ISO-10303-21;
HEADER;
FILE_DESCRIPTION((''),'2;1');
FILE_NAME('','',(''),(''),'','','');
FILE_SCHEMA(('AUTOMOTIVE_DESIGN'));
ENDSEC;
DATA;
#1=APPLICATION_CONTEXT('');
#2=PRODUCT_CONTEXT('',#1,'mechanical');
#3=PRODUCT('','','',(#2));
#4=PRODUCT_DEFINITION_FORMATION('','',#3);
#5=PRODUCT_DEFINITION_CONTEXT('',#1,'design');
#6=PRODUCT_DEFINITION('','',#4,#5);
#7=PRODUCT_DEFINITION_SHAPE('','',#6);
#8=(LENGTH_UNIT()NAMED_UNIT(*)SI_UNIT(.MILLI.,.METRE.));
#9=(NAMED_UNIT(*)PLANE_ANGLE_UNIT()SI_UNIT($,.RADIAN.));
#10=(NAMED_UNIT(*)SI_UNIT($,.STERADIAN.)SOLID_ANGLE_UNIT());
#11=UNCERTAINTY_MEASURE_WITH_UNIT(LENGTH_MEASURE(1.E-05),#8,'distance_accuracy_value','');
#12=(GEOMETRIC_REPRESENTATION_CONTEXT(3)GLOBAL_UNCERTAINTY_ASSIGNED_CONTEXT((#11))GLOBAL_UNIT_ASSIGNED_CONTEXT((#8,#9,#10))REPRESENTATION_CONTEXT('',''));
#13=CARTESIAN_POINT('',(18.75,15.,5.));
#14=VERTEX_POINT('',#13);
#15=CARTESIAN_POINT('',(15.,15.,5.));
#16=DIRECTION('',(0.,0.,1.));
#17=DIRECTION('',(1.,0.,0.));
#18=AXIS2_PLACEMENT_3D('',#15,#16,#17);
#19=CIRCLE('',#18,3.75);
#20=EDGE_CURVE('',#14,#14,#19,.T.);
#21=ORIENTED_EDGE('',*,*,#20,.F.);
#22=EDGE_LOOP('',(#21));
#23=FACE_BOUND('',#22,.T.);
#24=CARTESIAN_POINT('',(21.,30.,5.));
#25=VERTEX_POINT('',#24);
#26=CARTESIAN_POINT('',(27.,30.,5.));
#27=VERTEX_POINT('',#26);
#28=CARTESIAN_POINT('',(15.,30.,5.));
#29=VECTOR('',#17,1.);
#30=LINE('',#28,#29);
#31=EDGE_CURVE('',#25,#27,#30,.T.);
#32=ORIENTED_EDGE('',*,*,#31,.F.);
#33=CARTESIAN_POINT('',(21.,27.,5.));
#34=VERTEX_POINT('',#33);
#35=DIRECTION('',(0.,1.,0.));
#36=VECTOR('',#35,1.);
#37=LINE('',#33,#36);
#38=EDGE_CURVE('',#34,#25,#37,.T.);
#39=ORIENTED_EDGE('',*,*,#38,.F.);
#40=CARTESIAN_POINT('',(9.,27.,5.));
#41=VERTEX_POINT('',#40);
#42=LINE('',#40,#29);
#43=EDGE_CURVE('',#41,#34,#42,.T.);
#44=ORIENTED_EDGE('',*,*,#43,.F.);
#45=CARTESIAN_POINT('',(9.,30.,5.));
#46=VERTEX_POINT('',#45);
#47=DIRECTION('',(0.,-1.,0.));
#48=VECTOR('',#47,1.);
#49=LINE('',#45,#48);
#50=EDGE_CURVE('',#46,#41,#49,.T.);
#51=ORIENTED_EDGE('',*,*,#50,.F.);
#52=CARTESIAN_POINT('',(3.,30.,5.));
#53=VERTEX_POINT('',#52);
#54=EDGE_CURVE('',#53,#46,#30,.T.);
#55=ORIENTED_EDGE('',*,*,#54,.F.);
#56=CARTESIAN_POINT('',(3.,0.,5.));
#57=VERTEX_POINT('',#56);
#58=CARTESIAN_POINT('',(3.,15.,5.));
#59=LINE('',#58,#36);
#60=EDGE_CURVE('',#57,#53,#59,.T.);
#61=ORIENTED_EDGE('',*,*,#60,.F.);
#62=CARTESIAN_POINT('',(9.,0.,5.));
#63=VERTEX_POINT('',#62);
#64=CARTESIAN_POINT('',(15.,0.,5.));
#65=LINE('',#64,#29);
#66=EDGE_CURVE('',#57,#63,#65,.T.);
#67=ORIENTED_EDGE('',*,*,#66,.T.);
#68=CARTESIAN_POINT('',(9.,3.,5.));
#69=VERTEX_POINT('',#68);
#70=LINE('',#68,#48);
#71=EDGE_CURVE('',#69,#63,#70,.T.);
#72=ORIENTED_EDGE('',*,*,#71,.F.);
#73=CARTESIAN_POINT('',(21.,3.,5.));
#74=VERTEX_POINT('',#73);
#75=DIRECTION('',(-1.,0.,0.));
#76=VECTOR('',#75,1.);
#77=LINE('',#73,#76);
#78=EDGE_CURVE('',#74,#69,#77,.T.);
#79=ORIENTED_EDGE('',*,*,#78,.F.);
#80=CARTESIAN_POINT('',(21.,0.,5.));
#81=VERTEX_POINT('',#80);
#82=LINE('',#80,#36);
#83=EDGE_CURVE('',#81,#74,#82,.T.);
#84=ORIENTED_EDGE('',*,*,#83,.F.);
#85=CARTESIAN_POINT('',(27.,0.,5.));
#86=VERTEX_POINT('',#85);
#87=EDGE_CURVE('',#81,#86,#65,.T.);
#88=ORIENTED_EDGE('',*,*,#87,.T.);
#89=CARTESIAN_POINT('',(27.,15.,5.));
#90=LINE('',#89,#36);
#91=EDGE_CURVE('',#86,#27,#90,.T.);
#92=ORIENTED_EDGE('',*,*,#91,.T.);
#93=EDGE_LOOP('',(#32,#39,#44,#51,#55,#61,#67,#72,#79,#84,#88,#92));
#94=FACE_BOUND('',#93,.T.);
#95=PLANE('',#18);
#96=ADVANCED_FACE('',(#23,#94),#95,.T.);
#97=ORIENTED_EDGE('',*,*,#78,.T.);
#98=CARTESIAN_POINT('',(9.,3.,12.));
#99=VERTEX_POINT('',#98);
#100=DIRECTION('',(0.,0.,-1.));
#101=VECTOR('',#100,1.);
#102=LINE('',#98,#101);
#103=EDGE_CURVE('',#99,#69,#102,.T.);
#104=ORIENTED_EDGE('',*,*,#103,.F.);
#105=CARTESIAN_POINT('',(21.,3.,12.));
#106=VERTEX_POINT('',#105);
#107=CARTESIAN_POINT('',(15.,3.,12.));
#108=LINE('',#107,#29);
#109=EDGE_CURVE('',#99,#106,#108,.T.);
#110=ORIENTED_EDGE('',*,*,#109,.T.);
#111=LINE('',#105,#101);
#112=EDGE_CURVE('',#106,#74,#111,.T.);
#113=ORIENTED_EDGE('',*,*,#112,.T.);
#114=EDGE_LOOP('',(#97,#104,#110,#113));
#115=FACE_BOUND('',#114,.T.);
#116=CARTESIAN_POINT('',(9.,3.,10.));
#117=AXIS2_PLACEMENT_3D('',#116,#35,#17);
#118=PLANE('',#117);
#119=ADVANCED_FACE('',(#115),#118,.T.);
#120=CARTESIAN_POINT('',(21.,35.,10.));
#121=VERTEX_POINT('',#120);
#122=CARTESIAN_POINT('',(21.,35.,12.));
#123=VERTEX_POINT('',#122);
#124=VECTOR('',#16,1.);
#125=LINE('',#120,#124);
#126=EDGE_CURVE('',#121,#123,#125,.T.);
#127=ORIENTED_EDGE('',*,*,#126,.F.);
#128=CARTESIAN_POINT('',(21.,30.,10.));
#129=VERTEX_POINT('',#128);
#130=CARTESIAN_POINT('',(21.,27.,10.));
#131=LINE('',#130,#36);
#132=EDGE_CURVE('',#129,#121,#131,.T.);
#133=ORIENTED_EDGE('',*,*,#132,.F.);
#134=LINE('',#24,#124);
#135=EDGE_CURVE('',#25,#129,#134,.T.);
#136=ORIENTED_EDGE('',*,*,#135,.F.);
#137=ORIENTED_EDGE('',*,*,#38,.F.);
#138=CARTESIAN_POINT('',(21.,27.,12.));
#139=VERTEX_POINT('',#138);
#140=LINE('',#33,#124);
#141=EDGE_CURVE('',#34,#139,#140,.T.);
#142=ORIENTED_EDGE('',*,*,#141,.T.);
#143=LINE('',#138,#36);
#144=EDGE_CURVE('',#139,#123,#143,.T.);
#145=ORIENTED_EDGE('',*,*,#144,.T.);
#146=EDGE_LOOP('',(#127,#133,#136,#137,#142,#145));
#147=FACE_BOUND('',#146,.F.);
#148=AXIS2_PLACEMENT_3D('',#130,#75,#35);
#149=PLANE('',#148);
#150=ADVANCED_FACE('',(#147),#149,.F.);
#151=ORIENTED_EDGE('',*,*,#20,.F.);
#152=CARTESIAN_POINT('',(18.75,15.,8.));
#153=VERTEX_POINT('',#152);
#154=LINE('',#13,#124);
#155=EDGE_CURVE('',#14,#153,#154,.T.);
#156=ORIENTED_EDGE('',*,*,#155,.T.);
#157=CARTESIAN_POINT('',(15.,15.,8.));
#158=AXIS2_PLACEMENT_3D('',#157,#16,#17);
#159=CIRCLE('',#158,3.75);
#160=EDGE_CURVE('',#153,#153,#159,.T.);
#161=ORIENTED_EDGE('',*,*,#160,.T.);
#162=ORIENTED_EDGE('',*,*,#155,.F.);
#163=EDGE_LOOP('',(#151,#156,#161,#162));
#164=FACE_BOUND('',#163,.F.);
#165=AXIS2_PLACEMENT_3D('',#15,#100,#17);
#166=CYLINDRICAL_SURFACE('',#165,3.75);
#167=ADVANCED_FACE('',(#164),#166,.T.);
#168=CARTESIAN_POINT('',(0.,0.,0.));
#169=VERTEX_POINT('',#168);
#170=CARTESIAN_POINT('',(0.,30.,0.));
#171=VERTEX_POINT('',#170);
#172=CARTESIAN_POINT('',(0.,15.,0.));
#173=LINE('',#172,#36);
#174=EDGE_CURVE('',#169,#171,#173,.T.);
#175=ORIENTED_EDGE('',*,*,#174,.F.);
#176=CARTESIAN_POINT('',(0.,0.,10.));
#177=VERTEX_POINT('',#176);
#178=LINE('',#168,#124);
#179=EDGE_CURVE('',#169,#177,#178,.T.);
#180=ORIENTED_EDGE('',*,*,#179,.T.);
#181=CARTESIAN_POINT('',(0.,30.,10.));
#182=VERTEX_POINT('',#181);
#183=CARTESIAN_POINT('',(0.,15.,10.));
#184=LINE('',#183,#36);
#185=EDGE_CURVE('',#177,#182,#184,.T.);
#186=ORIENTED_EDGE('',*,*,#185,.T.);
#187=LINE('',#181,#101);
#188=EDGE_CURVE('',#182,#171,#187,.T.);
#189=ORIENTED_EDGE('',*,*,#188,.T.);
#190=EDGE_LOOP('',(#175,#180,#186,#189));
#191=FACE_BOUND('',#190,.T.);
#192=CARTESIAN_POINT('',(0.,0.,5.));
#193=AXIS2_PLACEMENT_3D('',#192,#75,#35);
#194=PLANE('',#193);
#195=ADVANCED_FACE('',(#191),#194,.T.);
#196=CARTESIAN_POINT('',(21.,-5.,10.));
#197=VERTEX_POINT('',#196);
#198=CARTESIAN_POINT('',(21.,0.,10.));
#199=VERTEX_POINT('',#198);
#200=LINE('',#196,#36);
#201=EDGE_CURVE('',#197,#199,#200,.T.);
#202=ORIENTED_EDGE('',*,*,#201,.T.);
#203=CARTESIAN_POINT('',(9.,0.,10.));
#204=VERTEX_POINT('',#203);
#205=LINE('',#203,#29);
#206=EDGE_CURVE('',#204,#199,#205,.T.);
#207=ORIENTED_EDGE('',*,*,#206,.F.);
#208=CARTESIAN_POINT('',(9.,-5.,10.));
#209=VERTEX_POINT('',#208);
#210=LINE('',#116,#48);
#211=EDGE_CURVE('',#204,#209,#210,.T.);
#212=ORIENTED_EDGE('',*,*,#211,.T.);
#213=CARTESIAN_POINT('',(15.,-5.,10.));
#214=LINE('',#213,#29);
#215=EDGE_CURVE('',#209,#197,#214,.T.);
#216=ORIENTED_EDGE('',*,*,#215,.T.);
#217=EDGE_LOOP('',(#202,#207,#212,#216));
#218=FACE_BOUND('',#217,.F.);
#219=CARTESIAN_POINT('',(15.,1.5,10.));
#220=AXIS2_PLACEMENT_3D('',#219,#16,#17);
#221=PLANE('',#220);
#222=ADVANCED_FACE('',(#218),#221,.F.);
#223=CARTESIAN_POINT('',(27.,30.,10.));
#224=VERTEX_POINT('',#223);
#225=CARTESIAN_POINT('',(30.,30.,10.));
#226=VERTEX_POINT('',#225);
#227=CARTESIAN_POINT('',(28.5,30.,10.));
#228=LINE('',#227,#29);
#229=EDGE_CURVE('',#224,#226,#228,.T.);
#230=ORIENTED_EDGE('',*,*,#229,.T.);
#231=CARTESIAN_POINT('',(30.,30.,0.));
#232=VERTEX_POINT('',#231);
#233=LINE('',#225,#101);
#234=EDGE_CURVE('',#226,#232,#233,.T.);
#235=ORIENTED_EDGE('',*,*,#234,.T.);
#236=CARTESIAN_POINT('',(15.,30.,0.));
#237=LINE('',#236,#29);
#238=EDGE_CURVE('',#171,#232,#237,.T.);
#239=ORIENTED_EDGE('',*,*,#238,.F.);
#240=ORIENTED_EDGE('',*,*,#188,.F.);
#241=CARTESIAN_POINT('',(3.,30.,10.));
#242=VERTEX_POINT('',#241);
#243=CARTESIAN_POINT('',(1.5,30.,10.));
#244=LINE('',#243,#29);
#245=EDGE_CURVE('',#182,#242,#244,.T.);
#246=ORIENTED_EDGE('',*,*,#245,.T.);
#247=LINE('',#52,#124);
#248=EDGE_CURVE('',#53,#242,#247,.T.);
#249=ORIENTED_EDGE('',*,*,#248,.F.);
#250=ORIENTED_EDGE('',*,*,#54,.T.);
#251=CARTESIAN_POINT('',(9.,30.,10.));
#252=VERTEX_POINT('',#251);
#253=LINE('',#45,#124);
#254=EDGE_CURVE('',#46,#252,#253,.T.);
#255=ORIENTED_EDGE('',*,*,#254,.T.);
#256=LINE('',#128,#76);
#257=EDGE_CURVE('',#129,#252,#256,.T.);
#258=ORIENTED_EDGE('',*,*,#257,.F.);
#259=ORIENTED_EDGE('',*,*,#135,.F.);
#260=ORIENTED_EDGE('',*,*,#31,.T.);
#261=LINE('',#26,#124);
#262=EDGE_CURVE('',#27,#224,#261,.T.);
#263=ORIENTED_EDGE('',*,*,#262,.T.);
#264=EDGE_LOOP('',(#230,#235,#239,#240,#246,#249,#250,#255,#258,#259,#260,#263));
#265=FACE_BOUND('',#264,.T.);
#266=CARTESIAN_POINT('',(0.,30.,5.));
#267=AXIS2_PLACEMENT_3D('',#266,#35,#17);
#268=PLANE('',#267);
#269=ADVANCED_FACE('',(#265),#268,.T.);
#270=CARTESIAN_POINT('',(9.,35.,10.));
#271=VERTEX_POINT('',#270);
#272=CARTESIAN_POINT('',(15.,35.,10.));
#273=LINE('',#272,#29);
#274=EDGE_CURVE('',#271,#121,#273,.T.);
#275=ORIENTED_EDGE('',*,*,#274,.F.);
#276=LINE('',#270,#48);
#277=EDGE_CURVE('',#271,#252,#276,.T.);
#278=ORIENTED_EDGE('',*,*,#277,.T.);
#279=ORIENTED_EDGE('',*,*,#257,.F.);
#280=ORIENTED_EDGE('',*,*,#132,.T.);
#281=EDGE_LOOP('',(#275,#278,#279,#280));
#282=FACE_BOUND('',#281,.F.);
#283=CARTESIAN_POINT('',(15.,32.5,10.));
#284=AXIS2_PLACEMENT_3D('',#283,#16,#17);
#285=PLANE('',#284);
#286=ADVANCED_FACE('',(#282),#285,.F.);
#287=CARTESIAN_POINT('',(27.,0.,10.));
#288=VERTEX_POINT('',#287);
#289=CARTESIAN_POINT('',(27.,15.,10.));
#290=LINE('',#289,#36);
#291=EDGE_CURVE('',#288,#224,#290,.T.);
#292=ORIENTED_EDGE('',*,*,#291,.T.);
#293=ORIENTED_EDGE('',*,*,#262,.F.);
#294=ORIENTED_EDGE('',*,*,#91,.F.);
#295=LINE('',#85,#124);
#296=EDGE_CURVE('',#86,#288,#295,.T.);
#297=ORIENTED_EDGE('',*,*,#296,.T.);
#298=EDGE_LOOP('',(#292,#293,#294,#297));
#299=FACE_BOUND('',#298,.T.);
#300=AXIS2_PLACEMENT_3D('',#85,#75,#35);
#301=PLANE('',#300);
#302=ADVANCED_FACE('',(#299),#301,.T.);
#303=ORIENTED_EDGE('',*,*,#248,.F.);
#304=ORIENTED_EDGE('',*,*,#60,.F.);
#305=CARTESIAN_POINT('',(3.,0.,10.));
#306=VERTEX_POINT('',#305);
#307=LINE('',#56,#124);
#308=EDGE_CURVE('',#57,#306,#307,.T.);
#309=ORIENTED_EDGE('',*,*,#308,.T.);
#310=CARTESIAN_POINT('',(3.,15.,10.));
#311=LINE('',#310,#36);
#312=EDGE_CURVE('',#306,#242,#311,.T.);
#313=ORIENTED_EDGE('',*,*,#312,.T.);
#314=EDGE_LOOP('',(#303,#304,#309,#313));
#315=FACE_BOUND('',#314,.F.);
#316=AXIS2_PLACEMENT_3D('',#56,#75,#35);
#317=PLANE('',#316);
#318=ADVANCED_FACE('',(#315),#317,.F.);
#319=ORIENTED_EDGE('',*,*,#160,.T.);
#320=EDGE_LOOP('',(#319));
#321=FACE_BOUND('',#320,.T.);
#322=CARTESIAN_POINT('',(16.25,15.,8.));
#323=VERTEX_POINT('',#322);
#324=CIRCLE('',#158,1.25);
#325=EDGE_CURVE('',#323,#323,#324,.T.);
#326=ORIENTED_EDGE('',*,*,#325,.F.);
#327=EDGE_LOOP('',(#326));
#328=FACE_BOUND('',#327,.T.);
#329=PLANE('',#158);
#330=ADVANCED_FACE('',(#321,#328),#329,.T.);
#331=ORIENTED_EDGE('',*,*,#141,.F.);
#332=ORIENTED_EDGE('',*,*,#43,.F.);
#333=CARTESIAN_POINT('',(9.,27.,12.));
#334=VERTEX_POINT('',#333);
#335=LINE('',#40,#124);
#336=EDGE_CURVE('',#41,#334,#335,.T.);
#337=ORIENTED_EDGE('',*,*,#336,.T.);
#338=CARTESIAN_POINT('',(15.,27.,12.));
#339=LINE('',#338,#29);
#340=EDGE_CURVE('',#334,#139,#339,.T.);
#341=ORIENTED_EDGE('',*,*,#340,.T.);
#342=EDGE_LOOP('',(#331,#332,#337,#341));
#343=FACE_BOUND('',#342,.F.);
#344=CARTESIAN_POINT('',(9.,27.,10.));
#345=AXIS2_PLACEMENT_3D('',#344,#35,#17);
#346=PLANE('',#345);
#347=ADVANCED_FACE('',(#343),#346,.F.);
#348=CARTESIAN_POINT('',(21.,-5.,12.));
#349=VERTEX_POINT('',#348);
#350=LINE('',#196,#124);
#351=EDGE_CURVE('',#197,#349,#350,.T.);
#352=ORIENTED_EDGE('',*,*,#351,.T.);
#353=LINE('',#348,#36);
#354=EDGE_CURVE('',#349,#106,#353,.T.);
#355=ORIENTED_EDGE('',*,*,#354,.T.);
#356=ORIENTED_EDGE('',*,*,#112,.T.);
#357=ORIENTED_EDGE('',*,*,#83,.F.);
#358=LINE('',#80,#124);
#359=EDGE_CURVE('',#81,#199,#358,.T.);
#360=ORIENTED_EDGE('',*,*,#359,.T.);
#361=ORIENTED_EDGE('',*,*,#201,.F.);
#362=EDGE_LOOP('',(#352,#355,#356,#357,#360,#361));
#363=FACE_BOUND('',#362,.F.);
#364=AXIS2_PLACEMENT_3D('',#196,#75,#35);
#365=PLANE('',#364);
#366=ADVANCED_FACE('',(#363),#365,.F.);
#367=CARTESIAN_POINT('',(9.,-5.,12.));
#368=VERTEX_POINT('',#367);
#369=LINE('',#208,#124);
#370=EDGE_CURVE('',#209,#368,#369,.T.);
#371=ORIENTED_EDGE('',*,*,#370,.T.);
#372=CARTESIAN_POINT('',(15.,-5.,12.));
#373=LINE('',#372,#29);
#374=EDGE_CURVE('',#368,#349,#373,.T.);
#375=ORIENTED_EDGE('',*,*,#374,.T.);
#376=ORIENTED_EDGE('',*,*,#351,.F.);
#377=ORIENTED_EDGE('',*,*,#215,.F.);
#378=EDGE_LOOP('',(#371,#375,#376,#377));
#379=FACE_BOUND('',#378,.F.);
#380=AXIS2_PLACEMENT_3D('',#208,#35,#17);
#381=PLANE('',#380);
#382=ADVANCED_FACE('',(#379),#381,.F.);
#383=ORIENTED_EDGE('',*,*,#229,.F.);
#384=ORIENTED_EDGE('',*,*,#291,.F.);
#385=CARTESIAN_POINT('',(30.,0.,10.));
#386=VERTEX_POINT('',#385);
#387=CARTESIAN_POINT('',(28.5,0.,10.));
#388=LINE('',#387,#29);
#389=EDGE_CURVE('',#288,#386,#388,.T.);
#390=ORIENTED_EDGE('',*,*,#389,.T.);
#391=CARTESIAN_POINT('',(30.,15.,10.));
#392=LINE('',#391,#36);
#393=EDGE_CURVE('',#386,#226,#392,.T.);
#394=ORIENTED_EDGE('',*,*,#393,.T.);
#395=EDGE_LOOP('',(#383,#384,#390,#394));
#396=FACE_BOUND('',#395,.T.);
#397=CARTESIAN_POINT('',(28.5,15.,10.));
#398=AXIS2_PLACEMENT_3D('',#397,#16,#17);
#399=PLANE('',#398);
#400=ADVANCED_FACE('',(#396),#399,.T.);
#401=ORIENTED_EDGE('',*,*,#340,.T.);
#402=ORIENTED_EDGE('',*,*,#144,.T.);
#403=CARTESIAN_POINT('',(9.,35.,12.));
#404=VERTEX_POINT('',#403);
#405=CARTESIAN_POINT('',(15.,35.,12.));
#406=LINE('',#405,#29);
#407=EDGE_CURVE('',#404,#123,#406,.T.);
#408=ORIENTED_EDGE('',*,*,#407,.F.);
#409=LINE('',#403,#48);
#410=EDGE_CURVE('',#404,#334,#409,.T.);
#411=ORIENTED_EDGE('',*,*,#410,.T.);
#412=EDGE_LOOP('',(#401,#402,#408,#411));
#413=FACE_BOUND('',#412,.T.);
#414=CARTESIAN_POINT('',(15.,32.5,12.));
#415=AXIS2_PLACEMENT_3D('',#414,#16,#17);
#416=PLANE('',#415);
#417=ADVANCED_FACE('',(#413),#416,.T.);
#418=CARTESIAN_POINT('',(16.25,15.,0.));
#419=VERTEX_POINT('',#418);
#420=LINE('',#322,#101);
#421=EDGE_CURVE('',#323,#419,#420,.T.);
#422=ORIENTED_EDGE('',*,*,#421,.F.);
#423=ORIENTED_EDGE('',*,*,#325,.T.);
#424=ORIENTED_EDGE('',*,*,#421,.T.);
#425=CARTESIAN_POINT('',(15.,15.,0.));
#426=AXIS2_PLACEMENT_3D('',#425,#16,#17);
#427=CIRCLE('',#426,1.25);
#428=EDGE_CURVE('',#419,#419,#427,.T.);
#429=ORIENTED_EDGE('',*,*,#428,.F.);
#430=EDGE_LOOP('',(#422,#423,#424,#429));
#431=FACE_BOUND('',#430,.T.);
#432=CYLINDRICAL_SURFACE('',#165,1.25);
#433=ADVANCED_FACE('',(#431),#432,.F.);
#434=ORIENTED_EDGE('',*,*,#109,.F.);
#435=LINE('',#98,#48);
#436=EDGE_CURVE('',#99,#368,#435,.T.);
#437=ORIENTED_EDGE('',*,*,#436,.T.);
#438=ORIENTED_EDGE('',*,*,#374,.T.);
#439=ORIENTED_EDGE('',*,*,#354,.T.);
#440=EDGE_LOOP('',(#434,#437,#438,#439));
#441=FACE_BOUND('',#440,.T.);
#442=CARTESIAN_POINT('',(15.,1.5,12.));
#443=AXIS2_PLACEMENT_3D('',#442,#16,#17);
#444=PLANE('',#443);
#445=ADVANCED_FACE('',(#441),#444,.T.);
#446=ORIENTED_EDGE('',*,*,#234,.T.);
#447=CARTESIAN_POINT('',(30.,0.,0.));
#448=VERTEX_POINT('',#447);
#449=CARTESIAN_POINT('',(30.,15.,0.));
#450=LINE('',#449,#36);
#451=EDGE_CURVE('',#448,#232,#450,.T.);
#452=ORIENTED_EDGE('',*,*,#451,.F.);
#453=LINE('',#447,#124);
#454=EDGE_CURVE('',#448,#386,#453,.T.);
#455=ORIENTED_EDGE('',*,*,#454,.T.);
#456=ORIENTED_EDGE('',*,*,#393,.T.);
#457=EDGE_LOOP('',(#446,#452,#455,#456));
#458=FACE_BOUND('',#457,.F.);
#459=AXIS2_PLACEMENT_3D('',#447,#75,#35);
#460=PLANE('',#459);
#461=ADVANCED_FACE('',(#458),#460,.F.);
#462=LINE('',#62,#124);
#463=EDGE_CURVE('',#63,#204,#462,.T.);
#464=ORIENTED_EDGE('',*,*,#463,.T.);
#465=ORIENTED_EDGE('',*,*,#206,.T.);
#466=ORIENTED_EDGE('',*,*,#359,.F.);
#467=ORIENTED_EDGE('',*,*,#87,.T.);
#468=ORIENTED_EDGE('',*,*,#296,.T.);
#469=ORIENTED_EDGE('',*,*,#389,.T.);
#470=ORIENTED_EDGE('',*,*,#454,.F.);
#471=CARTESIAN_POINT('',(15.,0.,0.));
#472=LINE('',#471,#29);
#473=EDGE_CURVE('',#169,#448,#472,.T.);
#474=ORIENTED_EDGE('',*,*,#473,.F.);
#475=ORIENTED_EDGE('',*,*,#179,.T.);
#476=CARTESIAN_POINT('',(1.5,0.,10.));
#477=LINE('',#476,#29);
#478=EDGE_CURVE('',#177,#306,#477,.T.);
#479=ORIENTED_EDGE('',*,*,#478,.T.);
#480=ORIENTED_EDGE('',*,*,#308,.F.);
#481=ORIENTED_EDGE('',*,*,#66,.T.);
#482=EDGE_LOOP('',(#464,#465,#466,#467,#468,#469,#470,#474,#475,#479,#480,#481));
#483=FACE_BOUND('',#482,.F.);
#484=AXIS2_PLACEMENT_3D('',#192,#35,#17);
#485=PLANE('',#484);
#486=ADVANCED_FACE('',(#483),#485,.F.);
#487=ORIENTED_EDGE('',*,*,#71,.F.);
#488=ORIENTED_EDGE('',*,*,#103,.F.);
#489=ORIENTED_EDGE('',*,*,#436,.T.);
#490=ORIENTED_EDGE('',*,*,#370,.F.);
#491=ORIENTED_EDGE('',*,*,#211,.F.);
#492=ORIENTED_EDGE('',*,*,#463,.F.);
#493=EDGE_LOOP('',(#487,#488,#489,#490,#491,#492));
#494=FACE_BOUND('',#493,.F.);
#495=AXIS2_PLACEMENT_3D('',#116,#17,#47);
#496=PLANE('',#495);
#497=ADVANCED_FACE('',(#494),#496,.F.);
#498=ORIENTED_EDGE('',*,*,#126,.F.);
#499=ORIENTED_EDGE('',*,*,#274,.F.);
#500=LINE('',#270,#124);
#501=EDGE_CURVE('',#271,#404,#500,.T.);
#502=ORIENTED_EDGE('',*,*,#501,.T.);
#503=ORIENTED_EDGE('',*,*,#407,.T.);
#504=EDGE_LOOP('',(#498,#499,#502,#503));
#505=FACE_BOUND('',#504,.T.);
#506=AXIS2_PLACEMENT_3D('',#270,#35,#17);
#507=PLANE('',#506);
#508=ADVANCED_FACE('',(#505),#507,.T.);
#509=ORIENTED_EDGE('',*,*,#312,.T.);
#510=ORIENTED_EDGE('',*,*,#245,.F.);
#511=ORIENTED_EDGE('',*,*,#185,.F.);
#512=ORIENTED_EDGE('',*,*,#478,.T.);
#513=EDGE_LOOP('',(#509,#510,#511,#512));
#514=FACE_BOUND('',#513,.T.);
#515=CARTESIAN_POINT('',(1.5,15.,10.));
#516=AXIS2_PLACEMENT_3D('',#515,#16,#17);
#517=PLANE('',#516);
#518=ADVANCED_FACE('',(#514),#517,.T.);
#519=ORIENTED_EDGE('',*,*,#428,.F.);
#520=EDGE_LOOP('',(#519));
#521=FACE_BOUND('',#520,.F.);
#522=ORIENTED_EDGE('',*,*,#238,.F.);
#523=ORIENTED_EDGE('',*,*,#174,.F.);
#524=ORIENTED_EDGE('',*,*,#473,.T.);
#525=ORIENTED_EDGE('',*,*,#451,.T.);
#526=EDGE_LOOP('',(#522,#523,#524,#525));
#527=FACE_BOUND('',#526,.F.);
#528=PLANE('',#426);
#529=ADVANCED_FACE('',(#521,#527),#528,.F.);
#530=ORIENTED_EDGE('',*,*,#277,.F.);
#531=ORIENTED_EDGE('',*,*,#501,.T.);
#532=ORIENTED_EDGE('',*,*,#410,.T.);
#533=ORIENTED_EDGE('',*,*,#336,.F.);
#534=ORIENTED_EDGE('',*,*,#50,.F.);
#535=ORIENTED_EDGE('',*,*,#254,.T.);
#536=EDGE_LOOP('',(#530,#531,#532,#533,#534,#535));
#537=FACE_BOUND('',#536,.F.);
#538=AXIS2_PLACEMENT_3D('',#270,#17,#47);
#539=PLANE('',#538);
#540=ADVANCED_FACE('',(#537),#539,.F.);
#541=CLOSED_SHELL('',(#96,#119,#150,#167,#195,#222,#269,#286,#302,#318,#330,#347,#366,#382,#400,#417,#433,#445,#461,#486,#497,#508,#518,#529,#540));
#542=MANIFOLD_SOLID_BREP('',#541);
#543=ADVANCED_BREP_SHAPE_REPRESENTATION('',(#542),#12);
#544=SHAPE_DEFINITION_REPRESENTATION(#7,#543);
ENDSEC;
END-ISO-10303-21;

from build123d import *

# Parameters (mm, degrees)
F0_W     = 30
F0_H     = 30
F0_R     = 1.25
F1_DEPTH = 5
F2_W     = 3
F2_H     = 30
F3_DEPTH = 5
F2_R     = 3.75
F2_R_2   = 1.25
F4_DEPTH = 3
F5_W     = 12
F5_H     = 3
F5_H_2   = 5
F6_DEPTH = 2
F7_W     = 12
F7_H     = 5
F7_H_2   = 3
F8_DEPTH = 2


# Not quite as in the source:
# - a feature names something its author has since deleted; it is built from what else it names


with BuildPart() as f1:
    # F0 (on Top) → F1 (new body)
    with BuildSketch(Plane.XY):
        with Locations((15, 15)):
            Rectangle(F0_W, F0_H)
        with Locations((15, 15)):
            Circle(F0_R, mode=Mode.SUBTRACT)
    extrude(amount=F1_DEPTH)

    # F2 (on face) → F3 (join)
    with BuildSketch(Plane.XY.offset(5)):
        with Locations((1.5, 15)):
            Rectangle(F2_W, F2_H)
        with Locations((28.5, 15)):
            Rectangle(F2_W, F2_H)
        Polygon((9, 3), (9, 0), (15, 0), (21, 0), (21, 3), (15, 3), align=None)
        Polygon((15, 30), (9, 30), (9, 27), (15, 27), (21, 27), (21, 30), align=None)
    extrude(amount=F3_DEPTH)

    # F2 (on face) → F4 (join)
    with BuildSketch(Plane.XY.offset(5)):
        with Locations((15, 15)):
            Circle(F2_R)
        with Locations((15, 15)):
            Circle(F2_R_2, mode=Mode.SUBTRACT)
    extrude(amount=F4_DEPTH)

    # F5 (on face) → F6 (join)
    with BuildSketch(Plane.XY.offset(10)):
        with Locations((15, 1.5)):
            Rectangle(F5_W, F5_H)
        with Locations((15, -2.5)):
            Rectangle(F5_W, F5_H_2)
    extrude(amount=F6_DEPTH)

    # F7 (on face) → F8 (join)
    with BuildSketch(Plane.XY.offset(10)):
        with Locations((15, 32.5)):
            Rectangle(F7_W, F7_H)
        with Locations((15, 28.5)):
            Rectangle(F7_W, F7_H_2)
    extrude(amount=F8_DEPTH)


solid = f1.part
